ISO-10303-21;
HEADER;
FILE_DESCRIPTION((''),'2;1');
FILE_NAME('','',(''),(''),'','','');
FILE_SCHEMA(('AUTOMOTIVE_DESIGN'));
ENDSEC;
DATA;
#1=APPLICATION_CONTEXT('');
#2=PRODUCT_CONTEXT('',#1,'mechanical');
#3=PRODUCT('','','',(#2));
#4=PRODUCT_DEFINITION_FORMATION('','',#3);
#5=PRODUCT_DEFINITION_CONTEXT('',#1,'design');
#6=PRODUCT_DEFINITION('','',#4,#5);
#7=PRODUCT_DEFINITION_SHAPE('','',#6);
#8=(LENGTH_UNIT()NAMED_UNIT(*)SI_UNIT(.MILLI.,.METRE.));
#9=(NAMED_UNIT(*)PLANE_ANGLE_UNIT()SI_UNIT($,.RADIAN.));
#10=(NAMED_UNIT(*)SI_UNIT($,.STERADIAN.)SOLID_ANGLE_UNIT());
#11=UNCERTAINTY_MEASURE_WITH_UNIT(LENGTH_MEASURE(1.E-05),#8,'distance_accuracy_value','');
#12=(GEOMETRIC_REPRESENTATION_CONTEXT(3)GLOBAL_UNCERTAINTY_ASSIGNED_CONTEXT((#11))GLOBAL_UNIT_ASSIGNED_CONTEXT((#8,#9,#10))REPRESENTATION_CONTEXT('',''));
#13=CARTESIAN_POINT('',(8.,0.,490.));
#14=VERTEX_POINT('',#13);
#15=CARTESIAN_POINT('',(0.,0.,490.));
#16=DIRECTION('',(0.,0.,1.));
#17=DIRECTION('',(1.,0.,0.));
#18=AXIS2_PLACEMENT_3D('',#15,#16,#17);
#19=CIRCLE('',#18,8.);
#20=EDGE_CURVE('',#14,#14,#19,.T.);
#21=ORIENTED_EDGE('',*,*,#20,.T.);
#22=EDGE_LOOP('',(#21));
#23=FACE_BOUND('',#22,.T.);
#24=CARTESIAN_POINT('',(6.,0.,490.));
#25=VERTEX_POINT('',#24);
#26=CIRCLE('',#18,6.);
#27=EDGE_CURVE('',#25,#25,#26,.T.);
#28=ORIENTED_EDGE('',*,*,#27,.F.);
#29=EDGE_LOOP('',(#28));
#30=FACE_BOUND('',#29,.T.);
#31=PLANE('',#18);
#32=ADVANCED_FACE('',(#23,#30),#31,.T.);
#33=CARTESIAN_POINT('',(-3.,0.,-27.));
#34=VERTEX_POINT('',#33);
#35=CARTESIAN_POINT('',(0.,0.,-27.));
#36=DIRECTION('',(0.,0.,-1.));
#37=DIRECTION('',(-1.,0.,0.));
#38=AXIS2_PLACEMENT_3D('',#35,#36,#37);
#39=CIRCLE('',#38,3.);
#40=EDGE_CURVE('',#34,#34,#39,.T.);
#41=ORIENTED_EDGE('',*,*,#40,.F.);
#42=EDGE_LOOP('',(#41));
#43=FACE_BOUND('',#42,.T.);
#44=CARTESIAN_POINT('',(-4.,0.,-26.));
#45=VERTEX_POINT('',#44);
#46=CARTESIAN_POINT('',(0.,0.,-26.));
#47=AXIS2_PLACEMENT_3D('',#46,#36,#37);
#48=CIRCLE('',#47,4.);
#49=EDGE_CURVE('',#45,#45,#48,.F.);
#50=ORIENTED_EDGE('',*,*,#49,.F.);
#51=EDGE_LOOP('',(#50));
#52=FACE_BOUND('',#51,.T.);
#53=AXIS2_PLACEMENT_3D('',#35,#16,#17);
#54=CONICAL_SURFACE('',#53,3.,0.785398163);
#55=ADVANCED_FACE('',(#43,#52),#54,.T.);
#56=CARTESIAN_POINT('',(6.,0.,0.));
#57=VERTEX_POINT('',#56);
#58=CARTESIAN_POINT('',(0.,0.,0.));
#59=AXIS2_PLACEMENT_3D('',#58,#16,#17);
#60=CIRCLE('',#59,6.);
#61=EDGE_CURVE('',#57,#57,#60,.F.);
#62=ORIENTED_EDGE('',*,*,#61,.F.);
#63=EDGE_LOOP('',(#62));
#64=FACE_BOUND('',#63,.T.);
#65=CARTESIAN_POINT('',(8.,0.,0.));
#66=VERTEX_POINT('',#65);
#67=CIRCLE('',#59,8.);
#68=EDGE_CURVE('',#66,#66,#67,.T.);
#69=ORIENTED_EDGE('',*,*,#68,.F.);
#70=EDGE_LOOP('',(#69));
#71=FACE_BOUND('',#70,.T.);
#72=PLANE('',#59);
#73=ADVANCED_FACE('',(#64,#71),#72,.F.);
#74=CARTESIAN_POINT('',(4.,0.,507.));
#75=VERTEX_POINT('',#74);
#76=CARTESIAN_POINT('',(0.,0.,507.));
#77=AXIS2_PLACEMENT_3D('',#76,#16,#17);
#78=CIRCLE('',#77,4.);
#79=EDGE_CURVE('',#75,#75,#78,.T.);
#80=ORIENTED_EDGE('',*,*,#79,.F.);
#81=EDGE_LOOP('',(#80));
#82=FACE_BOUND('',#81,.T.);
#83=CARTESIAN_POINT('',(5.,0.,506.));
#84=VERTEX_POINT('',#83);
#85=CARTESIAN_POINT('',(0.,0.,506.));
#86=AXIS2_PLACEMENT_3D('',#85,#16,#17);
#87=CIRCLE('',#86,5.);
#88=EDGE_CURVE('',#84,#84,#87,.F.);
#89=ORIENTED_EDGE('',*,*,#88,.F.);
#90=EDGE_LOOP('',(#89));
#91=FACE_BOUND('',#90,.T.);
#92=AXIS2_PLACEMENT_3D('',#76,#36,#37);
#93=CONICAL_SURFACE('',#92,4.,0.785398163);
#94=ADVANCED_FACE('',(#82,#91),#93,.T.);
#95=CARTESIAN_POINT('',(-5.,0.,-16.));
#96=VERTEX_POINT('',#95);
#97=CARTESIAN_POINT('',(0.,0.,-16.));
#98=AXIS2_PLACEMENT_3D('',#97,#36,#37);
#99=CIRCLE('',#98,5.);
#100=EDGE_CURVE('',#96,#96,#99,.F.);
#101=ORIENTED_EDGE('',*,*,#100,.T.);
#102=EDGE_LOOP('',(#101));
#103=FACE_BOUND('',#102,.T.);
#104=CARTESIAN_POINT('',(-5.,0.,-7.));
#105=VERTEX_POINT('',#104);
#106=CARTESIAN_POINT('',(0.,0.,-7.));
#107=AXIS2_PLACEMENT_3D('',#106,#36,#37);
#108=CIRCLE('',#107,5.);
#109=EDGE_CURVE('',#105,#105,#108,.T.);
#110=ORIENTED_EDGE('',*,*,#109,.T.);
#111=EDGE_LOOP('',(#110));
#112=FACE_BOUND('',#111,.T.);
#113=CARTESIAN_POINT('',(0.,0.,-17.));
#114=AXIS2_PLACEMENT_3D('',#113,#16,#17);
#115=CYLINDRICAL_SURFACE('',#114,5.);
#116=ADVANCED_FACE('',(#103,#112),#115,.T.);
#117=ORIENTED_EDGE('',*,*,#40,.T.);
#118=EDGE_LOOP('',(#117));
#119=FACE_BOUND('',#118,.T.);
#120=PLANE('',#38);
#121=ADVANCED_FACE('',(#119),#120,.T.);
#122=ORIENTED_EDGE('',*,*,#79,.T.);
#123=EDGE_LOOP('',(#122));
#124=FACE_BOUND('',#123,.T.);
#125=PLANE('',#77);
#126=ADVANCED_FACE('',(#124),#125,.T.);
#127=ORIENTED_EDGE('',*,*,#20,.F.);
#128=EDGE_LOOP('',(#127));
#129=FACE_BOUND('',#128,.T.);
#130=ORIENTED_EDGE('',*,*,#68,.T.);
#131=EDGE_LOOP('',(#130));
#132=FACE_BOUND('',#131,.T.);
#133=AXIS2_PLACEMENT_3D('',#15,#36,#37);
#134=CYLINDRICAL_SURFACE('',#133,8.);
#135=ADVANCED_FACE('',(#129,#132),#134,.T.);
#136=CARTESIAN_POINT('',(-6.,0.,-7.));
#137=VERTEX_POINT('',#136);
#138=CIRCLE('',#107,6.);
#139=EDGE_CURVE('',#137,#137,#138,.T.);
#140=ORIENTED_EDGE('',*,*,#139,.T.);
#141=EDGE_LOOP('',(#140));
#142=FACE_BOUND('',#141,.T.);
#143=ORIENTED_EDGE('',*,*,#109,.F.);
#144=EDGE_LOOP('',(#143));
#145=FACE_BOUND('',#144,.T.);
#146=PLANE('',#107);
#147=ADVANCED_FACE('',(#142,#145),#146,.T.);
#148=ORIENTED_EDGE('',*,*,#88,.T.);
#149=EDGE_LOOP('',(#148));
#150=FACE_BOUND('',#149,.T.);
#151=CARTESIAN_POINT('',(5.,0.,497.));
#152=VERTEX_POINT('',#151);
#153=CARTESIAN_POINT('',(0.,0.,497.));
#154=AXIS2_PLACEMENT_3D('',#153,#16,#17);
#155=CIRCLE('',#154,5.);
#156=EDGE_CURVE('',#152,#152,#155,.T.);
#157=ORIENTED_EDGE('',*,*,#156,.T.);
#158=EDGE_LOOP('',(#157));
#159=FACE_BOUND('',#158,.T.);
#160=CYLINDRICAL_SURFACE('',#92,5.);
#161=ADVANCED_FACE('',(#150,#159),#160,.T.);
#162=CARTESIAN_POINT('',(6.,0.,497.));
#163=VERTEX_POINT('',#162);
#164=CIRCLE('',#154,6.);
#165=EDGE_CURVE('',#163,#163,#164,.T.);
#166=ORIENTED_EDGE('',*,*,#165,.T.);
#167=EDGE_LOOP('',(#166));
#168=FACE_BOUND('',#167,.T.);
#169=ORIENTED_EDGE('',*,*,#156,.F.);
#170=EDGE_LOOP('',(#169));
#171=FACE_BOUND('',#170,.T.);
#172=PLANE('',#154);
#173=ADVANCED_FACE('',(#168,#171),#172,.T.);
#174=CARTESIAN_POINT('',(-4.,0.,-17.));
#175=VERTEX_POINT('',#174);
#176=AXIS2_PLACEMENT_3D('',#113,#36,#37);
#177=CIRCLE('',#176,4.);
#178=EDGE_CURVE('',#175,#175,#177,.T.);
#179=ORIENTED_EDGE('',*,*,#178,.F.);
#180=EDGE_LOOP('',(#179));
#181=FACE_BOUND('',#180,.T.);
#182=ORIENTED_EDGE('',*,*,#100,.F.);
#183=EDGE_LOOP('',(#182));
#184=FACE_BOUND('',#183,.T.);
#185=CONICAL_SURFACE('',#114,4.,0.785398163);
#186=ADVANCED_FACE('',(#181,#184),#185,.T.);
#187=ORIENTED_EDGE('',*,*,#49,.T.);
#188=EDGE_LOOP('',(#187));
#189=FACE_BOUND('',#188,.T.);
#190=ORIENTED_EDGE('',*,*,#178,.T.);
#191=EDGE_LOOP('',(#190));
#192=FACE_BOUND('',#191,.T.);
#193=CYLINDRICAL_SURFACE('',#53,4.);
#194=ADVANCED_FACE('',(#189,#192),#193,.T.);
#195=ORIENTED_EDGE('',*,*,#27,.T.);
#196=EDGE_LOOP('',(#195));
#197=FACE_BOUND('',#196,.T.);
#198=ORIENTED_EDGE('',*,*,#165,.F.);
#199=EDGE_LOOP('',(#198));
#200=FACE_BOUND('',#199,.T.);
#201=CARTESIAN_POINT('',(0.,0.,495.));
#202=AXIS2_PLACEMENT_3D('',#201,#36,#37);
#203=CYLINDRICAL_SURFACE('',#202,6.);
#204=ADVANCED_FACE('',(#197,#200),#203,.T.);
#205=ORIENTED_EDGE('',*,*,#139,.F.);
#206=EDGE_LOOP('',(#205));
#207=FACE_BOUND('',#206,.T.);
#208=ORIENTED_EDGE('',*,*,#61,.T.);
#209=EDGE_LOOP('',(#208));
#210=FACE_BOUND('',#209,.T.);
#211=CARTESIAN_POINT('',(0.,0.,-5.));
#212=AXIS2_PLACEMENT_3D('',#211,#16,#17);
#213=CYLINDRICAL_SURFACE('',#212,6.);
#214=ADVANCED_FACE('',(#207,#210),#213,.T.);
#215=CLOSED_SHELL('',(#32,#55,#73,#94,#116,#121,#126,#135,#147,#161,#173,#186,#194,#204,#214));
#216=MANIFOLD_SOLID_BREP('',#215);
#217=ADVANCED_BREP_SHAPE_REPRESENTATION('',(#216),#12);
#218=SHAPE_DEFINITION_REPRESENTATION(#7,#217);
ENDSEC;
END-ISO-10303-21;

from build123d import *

# Parameters (mm, degrees)
SKETCH1_R           = 8
BOSS_EXTRUDE1_DEPTH = 490
SKETCH6_R           = 6
BOSS_EXTRUDE2_DEPTH = 5
SKETCH7_R           = 6
BOSS_EXTRUDE3_DEPTH = 2
SKETCH8_R           = 5
BOSS_EXTRUDE4_DEPTH = 10
SKETCH9_R           = 4
BOSS_EXTRUDE5_DEPTH = 10
CHAMFER1_SIZE       = 1
CHAMFER2_SIZE       = 1
BOSS_EXTRUDE6_START = 5
SKETCH10_R          = 6
BOSS_EXTRUDE6_DEPTH = 5
BOSS_EXTRUDE7_START = 2
SKETCH11_R          = 6
BOSS_EXTRUDE7_DEPTH = 2
BOSS_EXTRUDE8_START = 10
SKETCH12_R          = 5
BOSS_EXTRUDE8_DEPTH = 10
CHAMFER3_SIZE       = 1


with BuildPart() as part:
    # Sketch1 → Boss-Extrude1 (new body)
    with BuildSketch(Plane.XY):
        Circle(SKETCH1_R)
    extrude(amount=BOSS_EXTRUDE1_DEPTH)

    # Sketch6 → Boss-Extrude2 (add)
    with BuildSketch(Plane(origin=(0, 0, 0), x_dir=(-1, 0, 0), z_dir=(0, 0, -1))):
        with Locations(Location((0, 0, 0), (0, 0, 180))):
            Circle(SKETCH6_R)
    extrude(amount=BOSS_EXTRUDE2_DEPTH)

    # Sketch7 → Boss-Extrude3 (add)
    with BuildSketch(Plane(origin=(0, 0, -5), x_dir=(-1, 0, 0), z_dir=(0, 0, -1))):
        with Locations(Location((0, 0, 0), (0, 0, 180))):
            Circle(SKETCH7_R)
    extrude(amount=BOSS_EXTRUDE3_DEPTH)

    # Sketch8 → Boss-Extrude4 (add)
    with BuildSketch(Plane(origin=(0, 0, -7), x_dir=(-1, 0, 0), z_dir=(0, 0, -1))):
        Circle(SKETCH8_R)
    extrude(amount=BOSS_EXTRUDE4_DEPTH)

    # Sketch9 → Boss-Extrude5 (add)
    with BuildSketch(Plane(origin=(0, 0, -17), x_dir=(-1, 0, 0), z_dir=(0, 0, -1))):
        Circle(SKETCH9_R)
    extrude(amount=BOSS_EXTRUDE5_DEPTH)

    # Chamfer1
    chamfer1_edges = [part.edges().sort_by_distance(p)[0] for p in [
        (5, 0, -17),
    ]]
    chamfer(chamfer1_edges, length=CHAMFER1_SIZE - 0.0001)  # a hair under: the kernel refuses the full size

    # Chamfer2
    chamfer2_edges = [part.edges().sort_by_distance(p)[0] for p in [
        (4, 0, -27),
    ]]
    chamfer(chamfer2_edges, length=CHAMFER2_SIZE)

    # Sketch10 → Boss-Extrude6 (add)
    with BuildSketch(Plane.XY.offset(490).offset(BOSS_EXTRUDE6_START)):
        Circle(SKETCH10_R)
    extrude(amount=-BOSS_EXTRUDE6_DEPTH)

    # Sketch11 → Boss-Extrude7 (add)
    with BuildSketch(Plane.XY.offset(495).offset(BOSS_EXTRUDE7_START)):
        Circle(SKETCH11_R)
    extrude(amount=-BOSS_EXTRUDE7_DEPTH)

    # Sketch12 → Boss-Extrude8 (add)
    with BuildSketch(Plane.XY.offset(497).offset(BOSS_EXTRUDE8_START)):
        with Locations(Location((0, 0, 0), (0, 0, 180))):
            Circle(SKETCH12_R)
    extrude(amount=-BOSS_EXTRUDE8_DEPTH)

    # Chamfer3
    chamfer3_edges = [part.edges().sort_by_distance(p)[0] for p in [
        (5, 0, 507),
    ]]
    chamfer(chamfer3_edges, length=CHAMFER3_SIZE)


solid = part.part
